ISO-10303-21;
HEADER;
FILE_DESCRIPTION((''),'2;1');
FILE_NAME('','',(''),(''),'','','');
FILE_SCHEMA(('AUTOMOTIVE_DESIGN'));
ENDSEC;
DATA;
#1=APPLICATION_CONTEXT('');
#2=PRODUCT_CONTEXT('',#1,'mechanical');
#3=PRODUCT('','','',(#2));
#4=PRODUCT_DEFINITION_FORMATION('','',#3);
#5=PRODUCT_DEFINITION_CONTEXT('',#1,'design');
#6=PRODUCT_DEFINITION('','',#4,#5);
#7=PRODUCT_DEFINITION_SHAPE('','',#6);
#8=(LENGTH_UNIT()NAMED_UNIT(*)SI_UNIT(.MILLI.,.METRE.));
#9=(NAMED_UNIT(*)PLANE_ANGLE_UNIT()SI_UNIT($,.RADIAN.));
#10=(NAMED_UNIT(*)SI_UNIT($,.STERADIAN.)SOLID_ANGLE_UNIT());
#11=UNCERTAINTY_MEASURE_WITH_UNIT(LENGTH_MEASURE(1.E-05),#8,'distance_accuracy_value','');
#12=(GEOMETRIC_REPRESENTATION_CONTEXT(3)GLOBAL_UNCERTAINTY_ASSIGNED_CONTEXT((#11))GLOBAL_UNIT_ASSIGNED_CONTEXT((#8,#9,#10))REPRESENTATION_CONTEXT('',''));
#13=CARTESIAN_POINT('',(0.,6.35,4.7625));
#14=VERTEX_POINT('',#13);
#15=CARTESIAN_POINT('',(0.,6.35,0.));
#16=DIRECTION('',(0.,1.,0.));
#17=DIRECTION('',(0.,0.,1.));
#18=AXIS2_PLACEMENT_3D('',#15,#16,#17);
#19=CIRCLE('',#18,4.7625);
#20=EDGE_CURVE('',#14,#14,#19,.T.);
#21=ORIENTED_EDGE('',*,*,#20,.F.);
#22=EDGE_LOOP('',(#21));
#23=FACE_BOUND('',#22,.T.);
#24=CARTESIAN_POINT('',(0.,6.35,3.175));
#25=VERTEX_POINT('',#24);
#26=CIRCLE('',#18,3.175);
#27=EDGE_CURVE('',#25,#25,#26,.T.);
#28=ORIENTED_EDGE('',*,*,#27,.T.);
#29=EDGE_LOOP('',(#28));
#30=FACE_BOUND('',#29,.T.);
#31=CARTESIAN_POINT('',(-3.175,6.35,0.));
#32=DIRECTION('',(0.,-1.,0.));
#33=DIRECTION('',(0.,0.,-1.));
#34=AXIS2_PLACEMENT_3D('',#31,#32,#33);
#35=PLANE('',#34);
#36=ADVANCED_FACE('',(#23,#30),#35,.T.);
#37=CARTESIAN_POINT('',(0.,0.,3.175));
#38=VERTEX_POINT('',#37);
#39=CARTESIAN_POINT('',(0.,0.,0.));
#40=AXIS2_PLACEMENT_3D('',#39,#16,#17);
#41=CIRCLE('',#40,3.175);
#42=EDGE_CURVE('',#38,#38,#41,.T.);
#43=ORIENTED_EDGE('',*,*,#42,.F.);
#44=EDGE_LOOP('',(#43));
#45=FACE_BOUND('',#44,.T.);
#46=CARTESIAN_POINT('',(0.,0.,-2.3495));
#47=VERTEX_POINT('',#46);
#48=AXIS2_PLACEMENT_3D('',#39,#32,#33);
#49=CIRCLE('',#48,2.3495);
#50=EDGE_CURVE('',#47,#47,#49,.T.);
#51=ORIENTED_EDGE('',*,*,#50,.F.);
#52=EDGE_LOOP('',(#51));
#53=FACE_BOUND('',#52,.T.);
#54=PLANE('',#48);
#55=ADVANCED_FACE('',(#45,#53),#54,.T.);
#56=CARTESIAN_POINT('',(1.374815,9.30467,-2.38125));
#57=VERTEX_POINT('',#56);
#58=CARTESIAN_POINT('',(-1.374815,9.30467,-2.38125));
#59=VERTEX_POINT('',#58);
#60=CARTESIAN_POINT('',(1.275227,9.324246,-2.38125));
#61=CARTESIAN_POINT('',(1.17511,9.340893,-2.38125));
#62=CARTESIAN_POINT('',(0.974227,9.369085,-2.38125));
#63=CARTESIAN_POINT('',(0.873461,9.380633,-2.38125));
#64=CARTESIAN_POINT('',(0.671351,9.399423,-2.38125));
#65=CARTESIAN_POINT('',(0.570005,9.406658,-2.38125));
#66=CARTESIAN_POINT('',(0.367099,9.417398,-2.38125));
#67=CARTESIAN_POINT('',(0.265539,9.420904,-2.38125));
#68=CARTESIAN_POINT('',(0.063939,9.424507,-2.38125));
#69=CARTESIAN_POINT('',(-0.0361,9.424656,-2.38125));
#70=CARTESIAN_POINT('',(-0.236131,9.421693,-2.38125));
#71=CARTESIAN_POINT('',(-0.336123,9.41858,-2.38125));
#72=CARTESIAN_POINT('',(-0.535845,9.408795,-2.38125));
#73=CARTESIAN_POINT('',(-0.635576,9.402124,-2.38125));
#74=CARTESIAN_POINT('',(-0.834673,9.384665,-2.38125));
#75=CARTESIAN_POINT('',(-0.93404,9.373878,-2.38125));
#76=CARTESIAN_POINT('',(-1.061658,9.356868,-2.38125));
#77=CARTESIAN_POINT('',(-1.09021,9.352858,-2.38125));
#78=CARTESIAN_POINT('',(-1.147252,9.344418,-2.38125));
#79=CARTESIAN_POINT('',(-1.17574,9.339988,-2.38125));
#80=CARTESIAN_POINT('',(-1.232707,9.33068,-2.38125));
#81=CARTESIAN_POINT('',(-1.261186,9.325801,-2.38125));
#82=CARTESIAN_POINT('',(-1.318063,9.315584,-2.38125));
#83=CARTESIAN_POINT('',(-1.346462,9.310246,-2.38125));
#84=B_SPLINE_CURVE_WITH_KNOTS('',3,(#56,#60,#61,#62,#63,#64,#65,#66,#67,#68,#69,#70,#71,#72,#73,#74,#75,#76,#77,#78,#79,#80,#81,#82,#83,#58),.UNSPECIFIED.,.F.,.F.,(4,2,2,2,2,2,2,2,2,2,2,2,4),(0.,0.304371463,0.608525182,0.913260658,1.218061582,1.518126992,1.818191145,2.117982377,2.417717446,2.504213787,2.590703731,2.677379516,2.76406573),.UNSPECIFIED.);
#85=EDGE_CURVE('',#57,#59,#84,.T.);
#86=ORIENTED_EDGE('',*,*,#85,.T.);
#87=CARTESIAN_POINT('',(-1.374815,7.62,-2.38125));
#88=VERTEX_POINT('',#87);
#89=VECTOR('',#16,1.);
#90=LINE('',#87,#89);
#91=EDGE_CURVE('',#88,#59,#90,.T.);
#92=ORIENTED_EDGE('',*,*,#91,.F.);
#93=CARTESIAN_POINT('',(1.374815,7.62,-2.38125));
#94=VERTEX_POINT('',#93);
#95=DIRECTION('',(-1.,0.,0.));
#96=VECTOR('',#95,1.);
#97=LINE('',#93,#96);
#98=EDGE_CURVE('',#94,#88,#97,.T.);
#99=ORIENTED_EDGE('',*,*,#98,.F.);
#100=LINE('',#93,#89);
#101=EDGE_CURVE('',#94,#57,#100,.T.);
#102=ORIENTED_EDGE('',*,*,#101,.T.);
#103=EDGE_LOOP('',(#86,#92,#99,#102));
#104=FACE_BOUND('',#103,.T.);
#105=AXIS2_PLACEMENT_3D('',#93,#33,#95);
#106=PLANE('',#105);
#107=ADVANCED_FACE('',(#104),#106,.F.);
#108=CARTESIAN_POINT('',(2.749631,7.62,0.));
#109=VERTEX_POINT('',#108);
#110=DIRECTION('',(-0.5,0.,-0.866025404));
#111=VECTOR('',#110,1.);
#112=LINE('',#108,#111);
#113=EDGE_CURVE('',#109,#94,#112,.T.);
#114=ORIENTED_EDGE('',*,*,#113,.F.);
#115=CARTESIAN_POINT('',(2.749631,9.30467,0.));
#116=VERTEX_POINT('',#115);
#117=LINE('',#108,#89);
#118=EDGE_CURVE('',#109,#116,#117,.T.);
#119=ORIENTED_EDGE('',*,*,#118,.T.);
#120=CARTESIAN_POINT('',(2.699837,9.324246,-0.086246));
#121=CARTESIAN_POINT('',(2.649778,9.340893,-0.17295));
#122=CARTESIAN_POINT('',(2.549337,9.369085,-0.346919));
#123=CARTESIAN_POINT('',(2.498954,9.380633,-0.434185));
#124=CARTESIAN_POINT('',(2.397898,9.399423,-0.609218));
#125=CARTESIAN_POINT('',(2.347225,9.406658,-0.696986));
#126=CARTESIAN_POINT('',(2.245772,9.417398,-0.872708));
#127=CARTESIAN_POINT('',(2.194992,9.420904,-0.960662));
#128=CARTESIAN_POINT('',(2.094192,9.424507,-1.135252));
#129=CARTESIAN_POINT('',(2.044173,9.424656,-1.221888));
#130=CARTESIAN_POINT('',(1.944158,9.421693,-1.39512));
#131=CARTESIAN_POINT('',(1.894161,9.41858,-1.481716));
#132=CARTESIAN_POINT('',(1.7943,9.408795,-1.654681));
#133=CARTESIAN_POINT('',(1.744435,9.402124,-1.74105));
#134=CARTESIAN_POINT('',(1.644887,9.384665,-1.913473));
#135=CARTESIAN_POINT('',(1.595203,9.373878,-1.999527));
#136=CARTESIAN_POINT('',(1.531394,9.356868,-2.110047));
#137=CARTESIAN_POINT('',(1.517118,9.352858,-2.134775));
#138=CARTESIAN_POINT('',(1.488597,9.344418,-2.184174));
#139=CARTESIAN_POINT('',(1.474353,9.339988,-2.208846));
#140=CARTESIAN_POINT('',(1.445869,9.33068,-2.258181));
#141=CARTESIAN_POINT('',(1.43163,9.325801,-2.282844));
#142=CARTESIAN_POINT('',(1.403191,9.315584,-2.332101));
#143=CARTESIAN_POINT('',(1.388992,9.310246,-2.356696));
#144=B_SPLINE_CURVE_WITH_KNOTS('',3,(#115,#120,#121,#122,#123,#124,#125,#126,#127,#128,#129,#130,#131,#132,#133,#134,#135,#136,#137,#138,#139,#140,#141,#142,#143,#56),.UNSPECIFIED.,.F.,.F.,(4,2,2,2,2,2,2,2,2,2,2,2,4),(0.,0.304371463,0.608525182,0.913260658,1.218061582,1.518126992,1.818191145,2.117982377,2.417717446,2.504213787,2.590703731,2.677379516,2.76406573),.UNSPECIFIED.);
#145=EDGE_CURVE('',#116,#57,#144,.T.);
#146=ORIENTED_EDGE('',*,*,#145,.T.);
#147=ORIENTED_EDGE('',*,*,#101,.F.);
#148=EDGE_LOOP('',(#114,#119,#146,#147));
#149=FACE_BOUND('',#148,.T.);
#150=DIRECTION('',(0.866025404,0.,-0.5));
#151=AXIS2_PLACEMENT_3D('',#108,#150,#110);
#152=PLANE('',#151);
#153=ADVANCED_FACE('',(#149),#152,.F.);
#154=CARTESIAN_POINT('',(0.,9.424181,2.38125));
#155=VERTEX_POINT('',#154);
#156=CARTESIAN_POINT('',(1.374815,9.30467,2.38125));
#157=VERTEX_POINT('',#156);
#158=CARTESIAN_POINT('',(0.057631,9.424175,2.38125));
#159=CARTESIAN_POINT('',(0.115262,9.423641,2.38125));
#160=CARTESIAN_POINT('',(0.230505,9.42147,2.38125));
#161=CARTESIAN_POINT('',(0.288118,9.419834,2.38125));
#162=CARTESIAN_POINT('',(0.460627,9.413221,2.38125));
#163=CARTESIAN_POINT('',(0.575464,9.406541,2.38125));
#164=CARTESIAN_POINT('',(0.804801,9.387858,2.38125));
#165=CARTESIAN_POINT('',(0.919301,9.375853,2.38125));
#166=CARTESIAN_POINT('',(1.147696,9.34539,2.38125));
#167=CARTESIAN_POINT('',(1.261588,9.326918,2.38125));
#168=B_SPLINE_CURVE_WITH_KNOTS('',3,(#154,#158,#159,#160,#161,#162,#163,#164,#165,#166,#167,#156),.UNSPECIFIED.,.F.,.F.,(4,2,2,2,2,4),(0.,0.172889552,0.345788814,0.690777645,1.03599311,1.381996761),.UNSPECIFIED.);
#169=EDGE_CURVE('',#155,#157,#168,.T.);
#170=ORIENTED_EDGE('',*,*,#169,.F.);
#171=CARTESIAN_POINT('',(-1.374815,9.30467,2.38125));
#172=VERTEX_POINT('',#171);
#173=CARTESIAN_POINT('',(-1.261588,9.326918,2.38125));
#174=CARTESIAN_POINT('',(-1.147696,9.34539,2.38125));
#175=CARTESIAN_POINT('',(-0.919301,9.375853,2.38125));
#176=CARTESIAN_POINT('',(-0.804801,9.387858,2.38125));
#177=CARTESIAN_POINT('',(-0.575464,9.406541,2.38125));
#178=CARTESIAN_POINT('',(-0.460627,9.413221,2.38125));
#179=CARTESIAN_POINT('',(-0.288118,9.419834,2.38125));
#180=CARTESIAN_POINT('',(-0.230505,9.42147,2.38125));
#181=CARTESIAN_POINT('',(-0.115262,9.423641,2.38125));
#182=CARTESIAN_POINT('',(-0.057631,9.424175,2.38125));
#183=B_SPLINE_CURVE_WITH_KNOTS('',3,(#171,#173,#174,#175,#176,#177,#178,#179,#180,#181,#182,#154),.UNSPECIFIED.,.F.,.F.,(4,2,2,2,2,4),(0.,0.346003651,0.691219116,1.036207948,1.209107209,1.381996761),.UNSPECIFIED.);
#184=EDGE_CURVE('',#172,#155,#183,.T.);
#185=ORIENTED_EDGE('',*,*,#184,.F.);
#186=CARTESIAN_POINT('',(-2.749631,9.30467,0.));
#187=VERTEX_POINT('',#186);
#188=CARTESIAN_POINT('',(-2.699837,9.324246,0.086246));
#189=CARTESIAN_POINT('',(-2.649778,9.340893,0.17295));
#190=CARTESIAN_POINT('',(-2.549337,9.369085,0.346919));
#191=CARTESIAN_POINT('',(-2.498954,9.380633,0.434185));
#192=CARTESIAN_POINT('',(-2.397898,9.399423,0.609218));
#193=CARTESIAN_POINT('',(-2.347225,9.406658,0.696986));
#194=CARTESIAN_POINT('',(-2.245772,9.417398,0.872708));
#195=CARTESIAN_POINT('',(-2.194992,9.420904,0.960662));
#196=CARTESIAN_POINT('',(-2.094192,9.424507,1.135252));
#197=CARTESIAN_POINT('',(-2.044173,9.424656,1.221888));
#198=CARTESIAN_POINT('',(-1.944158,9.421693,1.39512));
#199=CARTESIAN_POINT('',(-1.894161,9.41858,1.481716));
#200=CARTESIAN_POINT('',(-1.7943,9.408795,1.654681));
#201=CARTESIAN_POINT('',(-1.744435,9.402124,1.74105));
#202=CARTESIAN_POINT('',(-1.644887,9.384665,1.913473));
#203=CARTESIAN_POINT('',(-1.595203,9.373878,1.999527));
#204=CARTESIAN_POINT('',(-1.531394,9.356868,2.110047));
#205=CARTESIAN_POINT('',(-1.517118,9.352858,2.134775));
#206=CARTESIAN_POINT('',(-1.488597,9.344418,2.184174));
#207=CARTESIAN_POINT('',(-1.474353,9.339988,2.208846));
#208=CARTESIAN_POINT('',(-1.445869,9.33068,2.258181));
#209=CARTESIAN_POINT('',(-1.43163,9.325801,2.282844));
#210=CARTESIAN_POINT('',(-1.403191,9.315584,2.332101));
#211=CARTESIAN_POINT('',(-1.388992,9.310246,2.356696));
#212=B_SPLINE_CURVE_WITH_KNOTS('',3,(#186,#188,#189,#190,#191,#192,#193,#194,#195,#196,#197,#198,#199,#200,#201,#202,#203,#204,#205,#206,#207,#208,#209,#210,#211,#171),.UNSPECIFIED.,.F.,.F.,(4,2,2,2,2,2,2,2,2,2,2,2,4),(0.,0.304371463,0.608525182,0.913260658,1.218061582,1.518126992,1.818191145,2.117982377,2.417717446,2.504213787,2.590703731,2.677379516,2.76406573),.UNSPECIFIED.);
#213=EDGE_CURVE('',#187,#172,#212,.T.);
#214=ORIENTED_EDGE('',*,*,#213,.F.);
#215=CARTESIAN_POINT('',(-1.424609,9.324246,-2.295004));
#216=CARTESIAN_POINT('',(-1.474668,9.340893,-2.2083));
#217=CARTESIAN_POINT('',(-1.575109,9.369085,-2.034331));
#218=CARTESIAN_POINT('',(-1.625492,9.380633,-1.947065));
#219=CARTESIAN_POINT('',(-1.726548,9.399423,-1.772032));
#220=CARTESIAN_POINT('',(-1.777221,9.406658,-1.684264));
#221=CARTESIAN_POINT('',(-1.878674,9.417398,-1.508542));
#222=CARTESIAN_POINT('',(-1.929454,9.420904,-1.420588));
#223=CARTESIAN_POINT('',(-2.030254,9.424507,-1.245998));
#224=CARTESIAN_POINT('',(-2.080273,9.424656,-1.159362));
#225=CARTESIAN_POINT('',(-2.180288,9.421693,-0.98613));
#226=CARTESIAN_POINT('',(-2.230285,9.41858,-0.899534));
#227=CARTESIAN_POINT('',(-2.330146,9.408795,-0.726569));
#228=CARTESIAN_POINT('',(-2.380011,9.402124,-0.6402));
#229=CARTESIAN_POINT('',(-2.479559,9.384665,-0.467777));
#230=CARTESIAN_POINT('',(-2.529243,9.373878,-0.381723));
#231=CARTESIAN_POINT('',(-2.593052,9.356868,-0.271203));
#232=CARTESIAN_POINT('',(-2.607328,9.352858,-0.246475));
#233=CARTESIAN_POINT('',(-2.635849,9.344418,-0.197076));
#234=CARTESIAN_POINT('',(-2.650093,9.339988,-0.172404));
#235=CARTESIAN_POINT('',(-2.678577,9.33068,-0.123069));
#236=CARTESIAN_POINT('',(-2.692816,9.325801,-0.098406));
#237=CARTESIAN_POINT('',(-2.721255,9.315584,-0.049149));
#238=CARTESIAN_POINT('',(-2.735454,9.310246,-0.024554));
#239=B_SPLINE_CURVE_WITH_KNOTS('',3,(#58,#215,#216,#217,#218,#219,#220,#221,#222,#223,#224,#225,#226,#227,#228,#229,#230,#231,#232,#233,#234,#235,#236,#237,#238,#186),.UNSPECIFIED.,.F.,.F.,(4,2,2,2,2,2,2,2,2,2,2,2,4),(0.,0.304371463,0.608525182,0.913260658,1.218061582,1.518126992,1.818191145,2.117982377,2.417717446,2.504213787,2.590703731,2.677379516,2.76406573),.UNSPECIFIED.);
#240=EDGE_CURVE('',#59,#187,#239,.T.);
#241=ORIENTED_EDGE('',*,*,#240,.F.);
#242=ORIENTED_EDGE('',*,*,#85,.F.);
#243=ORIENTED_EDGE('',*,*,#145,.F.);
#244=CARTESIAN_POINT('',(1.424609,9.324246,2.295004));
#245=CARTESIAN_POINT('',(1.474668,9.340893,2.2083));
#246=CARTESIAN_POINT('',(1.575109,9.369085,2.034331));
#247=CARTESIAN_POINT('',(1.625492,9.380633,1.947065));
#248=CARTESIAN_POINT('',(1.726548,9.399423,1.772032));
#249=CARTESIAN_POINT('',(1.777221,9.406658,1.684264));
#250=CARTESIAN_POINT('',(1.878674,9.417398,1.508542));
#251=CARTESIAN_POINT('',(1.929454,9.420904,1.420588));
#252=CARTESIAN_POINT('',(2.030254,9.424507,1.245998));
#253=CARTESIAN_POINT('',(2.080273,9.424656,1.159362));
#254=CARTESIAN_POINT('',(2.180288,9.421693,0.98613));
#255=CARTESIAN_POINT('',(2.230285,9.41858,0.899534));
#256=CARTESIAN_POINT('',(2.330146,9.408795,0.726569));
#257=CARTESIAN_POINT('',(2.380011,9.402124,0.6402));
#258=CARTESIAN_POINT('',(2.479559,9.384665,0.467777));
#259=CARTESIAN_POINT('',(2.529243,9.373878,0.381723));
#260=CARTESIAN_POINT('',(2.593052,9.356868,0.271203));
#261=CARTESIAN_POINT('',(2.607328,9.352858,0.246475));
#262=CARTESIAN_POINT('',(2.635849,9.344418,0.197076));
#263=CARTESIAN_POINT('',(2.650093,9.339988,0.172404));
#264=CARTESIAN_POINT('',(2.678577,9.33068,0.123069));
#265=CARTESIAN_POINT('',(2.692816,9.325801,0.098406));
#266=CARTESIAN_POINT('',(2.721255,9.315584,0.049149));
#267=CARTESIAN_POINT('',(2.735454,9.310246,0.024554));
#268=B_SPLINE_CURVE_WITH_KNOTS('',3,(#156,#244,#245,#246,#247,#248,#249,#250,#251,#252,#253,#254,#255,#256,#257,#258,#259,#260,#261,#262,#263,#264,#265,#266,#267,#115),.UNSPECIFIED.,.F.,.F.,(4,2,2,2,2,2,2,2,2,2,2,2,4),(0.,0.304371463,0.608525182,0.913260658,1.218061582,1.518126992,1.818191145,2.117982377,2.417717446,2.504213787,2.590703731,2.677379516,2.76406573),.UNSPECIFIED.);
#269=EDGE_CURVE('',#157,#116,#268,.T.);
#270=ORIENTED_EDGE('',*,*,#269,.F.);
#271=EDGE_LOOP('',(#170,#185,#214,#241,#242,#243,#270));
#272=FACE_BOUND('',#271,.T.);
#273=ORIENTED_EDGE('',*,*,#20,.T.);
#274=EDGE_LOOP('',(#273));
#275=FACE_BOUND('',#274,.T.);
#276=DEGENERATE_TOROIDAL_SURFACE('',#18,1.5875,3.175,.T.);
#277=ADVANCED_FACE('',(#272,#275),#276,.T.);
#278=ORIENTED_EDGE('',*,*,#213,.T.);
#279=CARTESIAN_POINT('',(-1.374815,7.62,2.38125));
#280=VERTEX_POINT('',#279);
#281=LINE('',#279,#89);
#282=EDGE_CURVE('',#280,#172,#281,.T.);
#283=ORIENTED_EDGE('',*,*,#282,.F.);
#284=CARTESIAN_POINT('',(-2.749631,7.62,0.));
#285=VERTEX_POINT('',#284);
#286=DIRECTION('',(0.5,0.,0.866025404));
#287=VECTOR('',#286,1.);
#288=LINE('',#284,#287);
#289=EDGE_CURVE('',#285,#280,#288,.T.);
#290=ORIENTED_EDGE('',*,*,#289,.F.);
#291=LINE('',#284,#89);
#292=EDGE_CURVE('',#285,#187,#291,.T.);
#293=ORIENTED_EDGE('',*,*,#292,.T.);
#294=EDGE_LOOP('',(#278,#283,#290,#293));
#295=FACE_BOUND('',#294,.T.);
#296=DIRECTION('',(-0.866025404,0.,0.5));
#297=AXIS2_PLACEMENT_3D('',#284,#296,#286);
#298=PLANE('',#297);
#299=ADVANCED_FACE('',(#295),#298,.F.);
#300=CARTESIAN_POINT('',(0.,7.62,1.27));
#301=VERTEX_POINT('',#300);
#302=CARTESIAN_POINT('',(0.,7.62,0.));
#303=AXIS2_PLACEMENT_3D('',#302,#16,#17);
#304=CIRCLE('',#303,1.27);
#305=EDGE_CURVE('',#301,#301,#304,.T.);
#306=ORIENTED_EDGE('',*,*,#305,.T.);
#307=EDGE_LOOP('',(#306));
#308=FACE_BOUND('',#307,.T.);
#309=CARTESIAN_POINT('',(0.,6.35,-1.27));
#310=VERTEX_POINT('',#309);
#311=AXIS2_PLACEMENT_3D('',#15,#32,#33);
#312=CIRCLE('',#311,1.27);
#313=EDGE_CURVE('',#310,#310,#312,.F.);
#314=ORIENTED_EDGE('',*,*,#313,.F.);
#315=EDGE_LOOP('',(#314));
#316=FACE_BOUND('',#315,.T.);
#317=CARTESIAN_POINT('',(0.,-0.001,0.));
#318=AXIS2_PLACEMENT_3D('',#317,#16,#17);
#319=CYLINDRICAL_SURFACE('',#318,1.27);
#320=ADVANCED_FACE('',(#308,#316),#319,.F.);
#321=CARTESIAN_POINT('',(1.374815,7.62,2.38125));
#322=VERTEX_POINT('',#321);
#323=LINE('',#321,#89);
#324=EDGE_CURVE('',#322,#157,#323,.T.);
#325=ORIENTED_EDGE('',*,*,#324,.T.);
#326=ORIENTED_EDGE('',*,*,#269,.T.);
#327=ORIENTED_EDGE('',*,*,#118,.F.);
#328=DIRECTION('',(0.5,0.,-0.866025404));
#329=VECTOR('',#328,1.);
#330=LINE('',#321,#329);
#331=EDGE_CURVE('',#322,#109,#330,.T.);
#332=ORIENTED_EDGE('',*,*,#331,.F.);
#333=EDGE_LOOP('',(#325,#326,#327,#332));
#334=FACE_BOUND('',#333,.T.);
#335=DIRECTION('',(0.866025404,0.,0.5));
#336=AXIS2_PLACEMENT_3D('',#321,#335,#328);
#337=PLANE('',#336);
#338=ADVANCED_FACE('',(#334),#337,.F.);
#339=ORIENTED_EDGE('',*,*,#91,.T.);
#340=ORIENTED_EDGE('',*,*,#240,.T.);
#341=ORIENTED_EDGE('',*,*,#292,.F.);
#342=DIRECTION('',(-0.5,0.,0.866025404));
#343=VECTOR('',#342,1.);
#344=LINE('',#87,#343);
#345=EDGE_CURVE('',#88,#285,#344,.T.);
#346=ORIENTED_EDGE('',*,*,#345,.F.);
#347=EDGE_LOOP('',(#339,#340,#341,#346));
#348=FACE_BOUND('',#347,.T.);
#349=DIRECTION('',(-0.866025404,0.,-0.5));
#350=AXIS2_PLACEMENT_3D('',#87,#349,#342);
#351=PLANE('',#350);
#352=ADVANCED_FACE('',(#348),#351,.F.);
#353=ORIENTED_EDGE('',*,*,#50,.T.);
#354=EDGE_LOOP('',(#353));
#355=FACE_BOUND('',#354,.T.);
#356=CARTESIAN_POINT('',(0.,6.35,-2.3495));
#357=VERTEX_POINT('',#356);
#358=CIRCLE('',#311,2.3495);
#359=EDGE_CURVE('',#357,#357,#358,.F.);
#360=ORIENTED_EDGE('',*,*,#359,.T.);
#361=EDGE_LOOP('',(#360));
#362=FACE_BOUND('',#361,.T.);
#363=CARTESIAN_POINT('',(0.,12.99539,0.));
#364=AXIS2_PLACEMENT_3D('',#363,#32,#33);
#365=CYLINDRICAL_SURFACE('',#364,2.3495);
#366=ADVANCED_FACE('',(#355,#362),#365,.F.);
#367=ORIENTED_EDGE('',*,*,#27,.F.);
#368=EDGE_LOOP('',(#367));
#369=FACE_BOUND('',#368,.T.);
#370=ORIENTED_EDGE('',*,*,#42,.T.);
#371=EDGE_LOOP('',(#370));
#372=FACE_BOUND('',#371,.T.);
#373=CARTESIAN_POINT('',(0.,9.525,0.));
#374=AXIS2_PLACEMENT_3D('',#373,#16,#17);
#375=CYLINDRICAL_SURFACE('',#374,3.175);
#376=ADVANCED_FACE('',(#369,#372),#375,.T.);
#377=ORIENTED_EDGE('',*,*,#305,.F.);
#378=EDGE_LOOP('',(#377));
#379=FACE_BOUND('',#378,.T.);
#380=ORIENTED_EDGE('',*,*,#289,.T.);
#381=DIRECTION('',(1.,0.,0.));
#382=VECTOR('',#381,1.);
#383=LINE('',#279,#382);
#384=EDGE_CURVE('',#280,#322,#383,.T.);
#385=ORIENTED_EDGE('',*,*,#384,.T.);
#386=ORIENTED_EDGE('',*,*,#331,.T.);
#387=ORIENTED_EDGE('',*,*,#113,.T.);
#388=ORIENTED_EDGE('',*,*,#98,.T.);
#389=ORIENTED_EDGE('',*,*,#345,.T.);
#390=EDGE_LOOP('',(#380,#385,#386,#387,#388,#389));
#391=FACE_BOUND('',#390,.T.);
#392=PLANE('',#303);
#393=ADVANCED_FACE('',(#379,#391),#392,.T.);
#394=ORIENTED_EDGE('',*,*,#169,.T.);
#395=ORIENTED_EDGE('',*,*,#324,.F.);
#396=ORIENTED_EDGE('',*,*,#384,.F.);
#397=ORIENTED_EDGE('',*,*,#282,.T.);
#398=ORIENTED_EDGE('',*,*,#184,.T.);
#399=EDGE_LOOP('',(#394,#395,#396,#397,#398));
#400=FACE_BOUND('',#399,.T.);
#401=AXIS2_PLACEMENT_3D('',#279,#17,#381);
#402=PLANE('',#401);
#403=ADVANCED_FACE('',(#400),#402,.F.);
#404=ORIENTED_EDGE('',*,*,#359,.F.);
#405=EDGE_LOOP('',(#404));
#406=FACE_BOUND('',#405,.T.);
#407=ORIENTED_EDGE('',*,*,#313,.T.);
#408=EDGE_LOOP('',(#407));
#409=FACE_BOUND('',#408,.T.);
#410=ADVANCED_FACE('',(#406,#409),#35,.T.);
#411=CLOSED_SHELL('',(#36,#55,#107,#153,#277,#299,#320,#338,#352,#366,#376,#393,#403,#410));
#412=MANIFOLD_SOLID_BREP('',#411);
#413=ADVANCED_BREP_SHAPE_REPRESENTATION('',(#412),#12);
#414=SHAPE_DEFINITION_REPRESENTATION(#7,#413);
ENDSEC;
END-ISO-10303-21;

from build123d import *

# Parameters (mm, degrees)
CUT_EXTRUDE1_DEPTH = 1.905
CUT_EXTRUDE2_REACH = 12.17
SKETCH3_R          = 1.27
SKETCH4_R          = 2.3495
CUT_EXTRUDE3_DEPTH = 6.35
FILLET1_R          = 3.175


with BuildPart() as part:
    # Sketch1 → Revolve1 (revolve)
    with BuildSketch(Plane.XY, mode=Mode.PRIVATE) as revolve1_sk:
        Polygon((0, 0), (-3.175, 0), (-3.175, 6.35), (-4.7625, 6.35), (-4.7625, 9.525), (0, 9.525), align=None)
    revolve(revolve1_sk.sketch.rotate(Axis((0, 9.525, 0), (0, -1, 0)), 270), axis=Axis((0, 9.525, 0), (0, -1, 0)))

    # Sketch2 → Cut-Extrude1 (cut)
    with BuildSketch(Plane(origin=(0, 9.525, 0), x_dir=(1, 0, 0), z_dir=(0, 1, 0))):
        Polygon((-1.374815329, -2.38125), (1.374815329, -2.38125), (2.749630657, 0), (1.374815329, 2.38125), (-1.374815329, 2.38125), (-2.749630657, 0), align=None)
    extrude(amount=-CUT_EXTRUDE1_DEPTH, mode=Mode.SUBTRACT)

    # Sketch3 → Cut-Extrude2 (cut, up to next)
    with BuildSketch(Plane(origin=(0, 7.62, 0), x_dir=(1, 0, 0), z_dir=(0, 1, 0)), mode=Mode.PRIVATE) as cut_extrude2_sk1:
        with Locations(Location((0, 0, 0), (0, 0, 270))):
            Circle(SKETCH3_R)
    cut_extrude2_tool1 = extrude(cut_extrude2_sk1.sketch, amount=-CUT_EXTRUDE2_REACH, mode=Mode.PRIVATE) & part.part
    add(cut_extrude2_tool1.solids().sort_by_distance((0, 7.62, 0))[0], mode=Mode.SUBTRACT)

    # Sketch4 → Cut-Extrude3 (cut)
    with BuildSketch(Plane.XZ):
        with Locations(Location((0, 0, 0), (0, 0, 270))):
            Circle(SKETCH4_R)
    extrude(amount=-CUT_EXTRUDE3_DEPTH, mode=Mode.SUBTRACT)

    # Fillet1
    # the kernel refuses this fillet: 3.175 mm, written as the material it takes off along each edge
    with BuildSketch(Plane(origin=(0, 9.525, 0), x_dir=(0, 0, 1), z_dir=(1, 0, 0))) as fillet1_piece_1:
        with BuildLine():
            CenterArc((4.7625 - FILLET1_R, FILLET1_R), FILLET1_R, 270, 90)
            Line((4.7625 - FILLET1_R, 0), (4.7625, 0))
            Line((4.7625, 0), (4.7625, FILLET1_R))
        make_face()
    revolve(axis=Axis((0, 9.525, 0), (0, -1, 0)), mode=Mode.SUBTRACT)


solid = part.part
